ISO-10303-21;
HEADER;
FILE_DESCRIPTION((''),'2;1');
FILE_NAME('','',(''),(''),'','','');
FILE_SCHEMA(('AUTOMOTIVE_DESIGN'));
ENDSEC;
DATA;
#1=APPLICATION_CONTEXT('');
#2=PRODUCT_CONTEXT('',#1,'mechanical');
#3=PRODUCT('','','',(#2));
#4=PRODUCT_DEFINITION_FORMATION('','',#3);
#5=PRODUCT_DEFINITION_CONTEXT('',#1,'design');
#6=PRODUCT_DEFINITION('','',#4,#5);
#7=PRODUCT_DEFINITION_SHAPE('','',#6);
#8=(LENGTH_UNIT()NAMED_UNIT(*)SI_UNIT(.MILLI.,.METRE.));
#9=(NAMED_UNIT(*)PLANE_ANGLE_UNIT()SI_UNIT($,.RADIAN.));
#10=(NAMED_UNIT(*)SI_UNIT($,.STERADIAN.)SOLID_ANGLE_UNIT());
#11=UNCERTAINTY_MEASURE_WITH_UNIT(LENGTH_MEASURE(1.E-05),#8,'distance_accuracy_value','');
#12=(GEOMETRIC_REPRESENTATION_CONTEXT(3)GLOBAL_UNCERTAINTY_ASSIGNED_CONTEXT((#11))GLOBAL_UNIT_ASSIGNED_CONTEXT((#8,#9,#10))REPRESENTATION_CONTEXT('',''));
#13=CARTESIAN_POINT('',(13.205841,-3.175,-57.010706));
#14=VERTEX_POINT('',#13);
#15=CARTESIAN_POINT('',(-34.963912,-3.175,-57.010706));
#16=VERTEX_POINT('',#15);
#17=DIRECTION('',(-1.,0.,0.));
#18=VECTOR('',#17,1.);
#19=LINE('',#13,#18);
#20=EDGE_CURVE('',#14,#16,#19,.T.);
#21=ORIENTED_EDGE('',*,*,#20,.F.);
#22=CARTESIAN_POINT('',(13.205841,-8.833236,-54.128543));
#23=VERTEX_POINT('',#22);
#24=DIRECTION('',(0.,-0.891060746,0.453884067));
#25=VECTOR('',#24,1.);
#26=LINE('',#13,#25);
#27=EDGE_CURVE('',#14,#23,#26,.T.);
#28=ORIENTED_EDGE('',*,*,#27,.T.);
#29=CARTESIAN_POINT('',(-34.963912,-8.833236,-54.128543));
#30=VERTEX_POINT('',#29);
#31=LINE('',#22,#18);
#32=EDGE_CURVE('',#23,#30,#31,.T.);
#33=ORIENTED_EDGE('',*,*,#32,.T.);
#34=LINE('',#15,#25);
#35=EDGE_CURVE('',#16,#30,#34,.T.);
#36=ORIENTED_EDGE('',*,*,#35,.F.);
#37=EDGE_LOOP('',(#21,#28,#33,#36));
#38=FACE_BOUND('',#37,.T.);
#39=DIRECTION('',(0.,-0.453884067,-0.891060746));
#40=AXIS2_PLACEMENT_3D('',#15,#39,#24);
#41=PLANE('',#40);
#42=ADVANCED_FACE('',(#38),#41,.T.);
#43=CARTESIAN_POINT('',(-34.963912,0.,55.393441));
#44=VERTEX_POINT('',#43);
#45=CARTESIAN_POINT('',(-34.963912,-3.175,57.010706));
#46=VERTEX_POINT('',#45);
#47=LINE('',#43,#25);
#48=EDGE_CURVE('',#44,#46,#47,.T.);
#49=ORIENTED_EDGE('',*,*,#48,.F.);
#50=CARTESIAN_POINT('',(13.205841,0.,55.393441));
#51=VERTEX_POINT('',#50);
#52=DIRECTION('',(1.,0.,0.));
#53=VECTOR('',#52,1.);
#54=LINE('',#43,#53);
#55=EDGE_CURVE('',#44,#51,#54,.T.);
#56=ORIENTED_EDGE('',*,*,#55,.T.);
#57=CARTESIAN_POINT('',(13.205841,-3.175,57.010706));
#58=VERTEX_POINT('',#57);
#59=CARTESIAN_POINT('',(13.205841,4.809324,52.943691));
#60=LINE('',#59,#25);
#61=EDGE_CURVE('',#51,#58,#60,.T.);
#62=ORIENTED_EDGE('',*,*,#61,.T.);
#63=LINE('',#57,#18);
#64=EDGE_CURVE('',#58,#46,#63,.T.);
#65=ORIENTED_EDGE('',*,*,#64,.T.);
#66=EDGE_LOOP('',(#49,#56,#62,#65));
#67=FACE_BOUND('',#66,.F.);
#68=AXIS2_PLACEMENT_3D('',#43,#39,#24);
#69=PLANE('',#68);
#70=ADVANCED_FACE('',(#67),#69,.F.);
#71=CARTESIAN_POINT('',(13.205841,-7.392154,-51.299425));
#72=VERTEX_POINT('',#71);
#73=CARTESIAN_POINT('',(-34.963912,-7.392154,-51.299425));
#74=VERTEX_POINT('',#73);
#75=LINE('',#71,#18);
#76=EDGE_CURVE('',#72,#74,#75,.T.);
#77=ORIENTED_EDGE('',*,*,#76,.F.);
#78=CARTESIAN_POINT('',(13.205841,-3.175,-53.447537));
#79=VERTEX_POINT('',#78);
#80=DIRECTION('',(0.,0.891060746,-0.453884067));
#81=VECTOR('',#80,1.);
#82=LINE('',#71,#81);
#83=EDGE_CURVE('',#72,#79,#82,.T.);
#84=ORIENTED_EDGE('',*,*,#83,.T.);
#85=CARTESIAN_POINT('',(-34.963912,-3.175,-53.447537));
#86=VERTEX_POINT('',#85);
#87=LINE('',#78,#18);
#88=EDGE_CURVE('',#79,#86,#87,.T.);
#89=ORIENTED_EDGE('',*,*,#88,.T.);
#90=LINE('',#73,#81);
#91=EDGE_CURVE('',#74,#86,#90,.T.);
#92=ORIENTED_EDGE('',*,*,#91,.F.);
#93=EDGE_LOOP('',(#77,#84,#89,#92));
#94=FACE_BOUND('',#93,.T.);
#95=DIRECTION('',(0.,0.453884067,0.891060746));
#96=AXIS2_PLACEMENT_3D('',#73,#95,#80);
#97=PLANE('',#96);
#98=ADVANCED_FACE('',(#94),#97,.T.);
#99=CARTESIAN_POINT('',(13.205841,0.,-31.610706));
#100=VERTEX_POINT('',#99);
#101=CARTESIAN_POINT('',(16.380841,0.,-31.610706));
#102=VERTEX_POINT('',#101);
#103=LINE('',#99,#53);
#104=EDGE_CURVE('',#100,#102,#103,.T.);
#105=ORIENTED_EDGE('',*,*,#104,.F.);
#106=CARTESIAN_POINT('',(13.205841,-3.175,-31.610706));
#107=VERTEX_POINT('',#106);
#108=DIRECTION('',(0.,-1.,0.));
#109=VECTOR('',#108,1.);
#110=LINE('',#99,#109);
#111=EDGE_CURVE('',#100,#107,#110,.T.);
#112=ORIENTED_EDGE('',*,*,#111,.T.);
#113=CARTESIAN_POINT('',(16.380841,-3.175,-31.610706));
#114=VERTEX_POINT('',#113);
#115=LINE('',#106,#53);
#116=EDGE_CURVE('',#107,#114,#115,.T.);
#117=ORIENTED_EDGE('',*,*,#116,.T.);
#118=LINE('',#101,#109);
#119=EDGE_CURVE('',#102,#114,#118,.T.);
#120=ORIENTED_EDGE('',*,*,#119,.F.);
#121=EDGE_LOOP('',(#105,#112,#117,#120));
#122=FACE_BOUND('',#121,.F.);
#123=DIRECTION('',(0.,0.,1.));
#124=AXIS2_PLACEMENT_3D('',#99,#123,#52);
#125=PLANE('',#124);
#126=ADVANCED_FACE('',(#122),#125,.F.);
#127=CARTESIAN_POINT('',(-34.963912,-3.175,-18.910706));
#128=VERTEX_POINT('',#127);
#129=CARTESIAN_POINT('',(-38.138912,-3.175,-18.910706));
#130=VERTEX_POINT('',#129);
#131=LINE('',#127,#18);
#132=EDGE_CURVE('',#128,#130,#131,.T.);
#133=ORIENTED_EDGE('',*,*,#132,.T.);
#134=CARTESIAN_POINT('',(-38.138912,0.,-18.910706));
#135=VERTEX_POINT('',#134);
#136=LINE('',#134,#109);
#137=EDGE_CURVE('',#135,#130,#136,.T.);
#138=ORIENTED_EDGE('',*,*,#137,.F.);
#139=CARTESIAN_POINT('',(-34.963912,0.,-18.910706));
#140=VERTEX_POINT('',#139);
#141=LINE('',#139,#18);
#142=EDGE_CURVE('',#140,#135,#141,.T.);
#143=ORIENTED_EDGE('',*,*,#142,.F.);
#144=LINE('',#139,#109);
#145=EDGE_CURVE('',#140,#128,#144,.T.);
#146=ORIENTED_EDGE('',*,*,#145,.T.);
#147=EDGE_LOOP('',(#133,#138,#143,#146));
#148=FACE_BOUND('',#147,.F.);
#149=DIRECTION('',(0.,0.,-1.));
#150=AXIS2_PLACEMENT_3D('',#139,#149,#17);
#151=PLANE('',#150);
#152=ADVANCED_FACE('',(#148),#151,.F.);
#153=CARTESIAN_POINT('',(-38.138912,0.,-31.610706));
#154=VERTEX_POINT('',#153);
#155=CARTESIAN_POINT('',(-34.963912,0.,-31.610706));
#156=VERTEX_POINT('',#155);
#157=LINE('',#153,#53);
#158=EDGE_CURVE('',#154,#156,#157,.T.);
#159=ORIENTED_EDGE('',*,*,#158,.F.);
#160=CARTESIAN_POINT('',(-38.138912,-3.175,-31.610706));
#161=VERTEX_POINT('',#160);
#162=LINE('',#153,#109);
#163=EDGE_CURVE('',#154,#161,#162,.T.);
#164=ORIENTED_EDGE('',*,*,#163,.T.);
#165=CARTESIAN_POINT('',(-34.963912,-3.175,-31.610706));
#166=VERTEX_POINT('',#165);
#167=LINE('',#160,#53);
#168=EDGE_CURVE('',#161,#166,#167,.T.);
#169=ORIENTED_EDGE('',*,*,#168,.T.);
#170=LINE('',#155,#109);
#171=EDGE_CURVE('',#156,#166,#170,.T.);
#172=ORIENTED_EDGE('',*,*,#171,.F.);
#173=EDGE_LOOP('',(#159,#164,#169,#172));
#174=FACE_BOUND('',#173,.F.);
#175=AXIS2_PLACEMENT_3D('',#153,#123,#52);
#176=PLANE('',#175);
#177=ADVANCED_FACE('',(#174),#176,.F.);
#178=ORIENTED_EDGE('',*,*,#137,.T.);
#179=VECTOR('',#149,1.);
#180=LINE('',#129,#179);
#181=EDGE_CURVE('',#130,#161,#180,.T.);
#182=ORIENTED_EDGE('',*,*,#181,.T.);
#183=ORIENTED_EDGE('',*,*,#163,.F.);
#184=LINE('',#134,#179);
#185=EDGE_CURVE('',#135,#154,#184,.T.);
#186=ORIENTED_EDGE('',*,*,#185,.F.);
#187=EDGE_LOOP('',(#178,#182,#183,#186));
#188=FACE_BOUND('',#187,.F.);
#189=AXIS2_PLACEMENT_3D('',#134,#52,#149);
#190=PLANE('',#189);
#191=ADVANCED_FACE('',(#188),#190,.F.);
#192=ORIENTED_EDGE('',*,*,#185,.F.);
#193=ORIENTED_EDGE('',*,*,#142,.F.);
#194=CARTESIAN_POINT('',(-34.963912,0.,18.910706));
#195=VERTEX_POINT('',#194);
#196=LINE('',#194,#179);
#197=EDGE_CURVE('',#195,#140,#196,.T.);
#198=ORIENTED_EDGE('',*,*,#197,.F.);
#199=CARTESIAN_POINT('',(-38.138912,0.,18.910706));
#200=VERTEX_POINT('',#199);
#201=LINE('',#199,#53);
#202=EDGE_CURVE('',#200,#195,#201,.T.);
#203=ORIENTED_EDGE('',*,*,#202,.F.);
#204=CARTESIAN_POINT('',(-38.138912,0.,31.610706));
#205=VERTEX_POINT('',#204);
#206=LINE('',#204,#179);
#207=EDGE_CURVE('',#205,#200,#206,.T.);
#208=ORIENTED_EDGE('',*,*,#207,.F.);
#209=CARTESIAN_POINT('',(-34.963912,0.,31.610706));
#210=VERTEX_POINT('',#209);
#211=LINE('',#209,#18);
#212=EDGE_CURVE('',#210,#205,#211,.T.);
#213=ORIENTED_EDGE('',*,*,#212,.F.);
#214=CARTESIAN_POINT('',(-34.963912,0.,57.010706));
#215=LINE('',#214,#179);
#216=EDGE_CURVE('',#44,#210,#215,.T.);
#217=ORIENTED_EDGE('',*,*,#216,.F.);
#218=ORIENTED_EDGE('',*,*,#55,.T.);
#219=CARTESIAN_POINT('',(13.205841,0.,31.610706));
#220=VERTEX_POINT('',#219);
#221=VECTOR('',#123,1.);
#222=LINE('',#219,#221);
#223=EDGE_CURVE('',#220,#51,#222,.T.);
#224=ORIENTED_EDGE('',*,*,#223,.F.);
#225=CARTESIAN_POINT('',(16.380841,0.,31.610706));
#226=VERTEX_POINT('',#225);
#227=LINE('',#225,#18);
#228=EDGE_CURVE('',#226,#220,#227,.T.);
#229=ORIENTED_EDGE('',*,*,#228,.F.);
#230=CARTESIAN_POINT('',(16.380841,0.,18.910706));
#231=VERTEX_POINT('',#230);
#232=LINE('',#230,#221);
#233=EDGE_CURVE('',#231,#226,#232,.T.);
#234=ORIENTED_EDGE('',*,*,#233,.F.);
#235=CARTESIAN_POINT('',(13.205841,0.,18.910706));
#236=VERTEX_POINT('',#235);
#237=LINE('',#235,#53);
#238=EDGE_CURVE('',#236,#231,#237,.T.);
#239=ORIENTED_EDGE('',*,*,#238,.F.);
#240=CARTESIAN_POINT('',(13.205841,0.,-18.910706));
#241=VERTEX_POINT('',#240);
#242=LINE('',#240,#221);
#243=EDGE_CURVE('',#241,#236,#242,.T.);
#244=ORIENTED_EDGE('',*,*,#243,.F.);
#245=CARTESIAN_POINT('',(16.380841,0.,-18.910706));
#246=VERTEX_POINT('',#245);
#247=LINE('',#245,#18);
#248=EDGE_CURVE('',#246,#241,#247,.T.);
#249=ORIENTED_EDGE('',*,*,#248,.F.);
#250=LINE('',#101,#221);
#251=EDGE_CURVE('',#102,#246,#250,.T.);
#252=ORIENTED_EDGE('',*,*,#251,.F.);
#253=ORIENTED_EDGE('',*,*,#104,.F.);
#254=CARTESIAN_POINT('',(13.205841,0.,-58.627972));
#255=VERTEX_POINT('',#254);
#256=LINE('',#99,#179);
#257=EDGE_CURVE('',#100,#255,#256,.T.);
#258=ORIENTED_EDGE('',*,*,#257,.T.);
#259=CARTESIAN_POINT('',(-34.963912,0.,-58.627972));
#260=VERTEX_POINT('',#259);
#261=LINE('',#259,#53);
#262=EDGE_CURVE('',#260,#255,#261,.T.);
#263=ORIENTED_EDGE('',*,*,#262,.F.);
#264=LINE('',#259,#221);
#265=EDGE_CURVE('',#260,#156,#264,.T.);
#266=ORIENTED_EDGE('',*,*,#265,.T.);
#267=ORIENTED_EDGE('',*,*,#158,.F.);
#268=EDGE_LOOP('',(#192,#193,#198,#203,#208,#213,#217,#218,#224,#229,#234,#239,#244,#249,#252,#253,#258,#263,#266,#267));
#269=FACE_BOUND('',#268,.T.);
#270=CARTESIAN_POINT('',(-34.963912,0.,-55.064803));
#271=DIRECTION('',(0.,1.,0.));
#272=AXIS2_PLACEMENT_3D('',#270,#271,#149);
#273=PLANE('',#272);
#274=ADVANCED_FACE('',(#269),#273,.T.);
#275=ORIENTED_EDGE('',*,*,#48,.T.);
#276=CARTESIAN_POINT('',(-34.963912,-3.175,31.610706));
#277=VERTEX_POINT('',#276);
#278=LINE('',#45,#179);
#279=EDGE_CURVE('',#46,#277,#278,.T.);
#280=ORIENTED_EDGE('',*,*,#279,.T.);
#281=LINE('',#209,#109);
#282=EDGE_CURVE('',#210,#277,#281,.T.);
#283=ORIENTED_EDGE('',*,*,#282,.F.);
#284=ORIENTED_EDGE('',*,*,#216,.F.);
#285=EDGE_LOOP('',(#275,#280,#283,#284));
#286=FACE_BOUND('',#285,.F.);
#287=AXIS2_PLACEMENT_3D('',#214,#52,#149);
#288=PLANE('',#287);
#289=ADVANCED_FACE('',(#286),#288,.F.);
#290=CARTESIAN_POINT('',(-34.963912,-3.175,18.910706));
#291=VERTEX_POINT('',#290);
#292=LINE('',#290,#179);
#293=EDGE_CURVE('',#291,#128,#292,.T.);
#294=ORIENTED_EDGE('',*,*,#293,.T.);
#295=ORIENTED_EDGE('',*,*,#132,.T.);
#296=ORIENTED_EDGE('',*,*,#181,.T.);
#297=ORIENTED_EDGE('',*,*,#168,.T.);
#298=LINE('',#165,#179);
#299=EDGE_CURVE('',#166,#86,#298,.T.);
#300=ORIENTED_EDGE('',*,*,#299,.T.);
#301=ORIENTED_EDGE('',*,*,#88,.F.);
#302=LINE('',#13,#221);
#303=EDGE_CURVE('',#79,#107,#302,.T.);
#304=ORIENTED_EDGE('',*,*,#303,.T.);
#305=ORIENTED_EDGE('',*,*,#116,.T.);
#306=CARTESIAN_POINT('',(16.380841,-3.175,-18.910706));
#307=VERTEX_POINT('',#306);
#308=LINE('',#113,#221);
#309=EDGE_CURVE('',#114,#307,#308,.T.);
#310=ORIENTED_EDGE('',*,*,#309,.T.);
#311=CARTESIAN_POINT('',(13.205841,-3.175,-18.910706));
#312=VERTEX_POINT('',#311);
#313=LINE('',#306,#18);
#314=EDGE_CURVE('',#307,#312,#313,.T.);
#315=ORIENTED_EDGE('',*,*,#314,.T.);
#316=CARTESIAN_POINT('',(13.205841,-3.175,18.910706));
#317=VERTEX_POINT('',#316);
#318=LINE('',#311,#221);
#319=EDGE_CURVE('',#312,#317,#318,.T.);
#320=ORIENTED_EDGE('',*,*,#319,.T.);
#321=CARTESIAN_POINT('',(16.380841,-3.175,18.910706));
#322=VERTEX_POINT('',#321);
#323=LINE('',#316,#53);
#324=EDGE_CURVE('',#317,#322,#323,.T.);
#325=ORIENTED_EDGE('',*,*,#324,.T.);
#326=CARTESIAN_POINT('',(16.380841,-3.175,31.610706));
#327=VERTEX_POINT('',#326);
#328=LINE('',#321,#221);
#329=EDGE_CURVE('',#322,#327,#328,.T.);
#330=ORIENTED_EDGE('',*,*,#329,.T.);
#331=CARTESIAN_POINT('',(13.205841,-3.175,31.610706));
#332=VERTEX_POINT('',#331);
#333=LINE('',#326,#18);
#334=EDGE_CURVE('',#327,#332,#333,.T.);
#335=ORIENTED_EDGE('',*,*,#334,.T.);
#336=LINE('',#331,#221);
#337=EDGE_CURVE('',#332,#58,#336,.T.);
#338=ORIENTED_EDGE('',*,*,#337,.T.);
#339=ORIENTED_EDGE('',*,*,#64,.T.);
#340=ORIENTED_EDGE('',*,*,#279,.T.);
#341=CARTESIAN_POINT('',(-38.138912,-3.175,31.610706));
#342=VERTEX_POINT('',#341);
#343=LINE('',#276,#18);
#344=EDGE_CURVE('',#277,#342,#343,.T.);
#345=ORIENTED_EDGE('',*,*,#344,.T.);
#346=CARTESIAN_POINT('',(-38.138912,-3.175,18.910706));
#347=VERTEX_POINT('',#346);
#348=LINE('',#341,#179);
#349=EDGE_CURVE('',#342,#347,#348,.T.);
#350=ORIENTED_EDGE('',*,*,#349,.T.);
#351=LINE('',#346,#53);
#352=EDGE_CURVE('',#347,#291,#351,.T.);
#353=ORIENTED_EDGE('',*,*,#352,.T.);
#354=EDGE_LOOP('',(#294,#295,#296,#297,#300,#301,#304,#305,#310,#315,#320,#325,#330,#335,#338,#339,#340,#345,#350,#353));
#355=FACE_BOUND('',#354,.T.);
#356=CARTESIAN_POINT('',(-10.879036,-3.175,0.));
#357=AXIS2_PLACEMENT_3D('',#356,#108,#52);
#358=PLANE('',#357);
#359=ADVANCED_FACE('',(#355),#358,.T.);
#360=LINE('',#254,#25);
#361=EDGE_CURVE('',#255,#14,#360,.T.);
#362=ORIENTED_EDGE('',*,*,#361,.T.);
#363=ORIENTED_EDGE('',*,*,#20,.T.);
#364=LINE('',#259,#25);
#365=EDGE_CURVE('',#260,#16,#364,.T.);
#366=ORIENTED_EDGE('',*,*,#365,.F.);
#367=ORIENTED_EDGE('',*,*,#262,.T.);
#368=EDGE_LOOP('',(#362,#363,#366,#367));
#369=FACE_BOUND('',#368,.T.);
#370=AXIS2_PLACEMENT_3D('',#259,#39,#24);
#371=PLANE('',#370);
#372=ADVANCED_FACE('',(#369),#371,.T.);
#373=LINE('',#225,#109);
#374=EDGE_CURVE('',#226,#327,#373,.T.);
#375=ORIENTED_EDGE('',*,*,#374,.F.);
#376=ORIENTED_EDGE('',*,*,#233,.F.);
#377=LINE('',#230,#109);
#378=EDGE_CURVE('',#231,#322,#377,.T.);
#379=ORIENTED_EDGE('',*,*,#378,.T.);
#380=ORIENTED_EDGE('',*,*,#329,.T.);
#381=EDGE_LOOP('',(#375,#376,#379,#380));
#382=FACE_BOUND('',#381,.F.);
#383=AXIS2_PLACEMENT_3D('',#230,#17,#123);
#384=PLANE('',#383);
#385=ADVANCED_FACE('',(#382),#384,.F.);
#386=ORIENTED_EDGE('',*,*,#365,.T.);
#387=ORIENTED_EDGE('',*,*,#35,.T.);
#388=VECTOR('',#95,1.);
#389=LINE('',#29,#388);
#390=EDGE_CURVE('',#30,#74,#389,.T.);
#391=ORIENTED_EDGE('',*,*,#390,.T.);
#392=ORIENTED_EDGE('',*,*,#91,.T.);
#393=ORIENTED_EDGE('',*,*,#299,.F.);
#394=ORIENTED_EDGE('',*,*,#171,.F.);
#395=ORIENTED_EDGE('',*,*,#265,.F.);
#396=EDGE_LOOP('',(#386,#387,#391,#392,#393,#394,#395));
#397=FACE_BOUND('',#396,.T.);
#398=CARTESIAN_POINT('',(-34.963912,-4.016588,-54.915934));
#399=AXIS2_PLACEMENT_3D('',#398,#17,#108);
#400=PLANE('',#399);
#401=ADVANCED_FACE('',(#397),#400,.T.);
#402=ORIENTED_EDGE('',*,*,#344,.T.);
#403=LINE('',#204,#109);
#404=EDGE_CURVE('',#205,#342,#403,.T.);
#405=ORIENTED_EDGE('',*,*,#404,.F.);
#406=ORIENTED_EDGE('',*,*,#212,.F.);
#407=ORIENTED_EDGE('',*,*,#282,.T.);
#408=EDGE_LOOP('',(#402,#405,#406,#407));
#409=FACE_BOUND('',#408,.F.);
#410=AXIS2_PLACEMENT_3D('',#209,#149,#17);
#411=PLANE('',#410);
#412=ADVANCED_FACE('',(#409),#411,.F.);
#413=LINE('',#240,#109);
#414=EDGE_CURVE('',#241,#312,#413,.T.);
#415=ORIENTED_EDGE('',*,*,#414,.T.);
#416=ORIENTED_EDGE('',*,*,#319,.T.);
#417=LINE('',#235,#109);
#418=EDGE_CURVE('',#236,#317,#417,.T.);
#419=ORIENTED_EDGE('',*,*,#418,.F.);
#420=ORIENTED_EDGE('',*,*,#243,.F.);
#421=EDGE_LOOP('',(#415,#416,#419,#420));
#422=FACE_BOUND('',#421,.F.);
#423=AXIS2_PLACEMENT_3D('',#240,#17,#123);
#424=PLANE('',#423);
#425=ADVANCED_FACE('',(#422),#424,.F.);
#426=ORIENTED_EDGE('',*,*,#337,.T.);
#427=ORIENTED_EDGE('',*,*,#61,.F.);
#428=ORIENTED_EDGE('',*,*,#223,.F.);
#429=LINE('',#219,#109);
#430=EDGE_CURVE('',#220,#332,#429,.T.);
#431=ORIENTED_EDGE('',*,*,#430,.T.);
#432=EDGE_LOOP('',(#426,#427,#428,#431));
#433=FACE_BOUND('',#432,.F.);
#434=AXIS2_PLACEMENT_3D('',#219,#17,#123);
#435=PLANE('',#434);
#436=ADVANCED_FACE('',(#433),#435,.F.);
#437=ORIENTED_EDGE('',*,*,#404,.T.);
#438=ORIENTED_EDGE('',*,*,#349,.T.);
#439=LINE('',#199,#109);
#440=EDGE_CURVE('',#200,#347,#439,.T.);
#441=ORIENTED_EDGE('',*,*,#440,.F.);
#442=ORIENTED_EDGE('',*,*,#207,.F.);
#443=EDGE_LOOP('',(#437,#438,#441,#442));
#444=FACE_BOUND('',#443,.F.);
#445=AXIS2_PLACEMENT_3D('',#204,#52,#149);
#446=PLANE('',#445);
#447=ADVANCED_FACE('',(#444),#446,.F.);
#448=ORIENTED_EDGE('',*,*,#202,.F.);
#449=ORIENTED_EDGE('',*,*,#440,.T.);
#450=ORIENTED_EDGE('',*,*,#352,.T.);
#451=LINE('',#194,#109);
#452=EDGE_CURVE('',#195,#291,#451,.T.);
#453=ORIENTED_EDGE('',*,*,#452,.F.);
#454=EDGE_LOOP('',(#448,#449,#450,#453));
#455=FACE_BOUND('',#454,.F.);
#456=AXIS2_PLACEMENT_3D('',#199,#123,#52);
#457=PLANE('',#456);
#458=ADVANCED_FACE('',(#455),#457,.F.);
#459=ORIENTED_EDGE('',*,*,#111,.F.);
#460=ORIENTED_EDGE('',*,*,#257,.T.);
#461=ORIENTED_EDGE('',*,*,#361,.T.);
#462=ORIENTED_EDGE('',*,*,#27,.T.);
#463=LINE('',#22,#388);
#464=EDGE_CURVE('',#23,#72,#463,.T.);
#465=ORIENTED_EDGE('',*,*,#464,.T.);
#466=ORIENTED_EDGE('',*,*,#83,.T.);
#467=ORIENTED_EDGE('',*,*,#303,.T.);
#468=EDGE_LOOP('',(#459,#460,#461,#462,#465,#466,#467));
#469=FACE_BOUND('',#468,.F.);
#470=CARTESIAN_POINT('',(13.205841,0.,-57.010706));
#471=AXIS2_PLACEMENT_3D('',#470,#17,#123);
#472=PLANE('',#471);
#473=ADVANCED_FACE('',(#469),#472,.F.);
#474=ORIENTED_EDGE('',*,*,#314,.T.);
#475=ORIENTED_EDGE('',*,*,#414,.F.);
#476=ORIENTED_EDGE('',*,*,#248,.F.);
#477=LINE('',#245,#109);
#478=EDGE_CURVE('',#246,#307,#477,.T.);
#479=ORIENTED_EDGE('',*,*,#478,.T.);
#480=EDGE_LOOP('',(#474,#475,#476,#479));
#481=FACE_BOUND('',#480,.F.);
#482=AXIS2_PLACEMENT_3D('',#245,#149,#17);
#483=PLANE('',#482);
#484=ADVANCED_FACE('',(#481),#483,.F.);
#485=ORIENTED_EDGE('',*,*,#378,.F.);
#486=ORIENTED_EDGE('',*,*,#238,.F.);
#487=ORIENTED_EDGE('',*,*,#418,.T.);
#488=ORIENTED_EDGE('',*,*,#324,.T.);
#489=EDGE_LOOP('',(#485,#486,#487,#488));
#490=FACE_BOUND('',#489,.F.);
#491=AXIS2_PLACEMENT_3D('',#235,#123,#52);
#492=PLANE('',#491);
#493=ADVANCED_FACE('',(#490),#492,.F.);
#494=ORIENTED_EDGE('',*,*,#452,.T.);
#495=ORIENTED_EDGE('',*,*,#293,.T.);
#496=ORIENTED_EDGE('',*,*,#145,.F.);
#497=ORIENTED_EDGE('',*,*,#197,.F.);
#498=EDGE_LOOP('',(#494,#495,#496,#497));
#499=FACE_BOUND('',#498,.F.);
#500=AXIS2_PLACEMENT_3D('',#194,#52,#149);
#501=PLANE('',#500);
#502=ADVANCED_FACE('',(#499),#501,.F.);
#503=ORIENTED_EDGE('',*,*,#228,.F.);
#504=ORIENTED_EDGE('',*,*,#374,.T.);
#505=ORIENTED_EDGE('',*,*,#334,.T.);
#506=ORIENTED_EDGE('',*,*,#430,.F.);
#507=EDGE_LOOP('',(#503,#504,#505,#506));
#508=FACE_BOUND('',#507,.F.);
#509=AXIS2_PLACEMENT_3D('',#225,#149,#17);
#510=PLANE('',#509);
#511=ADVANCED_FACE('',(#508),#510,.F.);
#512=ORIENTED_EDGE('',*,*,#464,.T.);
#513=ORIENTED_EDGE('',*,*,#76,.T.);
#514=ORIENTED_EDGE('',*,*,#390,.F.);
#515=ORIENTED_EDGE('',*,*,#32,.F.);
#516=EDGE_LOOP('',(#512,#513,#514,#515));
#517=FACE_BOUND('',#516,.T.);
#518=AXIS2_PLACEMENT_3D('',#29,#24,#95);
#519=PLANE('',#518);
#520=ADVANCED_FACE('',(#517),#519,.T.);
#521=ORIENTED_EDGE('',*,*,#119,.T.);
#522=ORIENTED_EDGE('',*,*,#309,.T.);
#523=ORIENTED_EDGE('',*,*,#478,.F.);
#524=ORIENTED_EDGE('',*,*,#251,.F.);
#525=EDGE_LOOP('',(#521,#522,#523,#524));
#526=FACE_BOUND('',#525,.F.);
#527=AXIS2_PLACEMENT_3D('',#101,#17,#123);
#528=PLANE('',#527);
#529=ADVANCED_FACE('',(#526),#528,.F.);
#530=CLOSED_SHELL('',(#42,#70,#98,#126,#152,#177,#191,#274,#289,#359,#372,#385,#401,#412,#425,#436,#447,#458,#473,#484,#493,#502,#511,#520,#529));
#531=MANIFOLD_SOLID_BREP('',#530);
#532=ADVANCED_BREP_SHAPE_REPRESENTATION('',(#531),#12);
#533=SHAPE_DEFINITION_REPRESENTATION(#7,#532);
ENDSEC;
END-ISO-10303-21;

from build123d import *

# Parameters (mm, degrees)
F1_DEPTH = 3.175
F3_DEPTH = 43.942
F5_DEPTH = 76.2
F6_DEPTH = 48.1697538


# Not quite as in the source:
# - a feature names something its author has since deleted; it is built from what else it names


with BuildPart() as f1:
    # F0 (on Front) → F1 (new body)
    with BuildSketch(Plane.XZ):
        Polygon((-34.9639124011, -57.0107064), (9.4471751978, -57.0107064), (13.2058413989, -57.0107064), (13.2058413989, -31.6107064), (16.3808413989, -31.6107064), (16.3808413989, -18.9107064), (13.2058413989, -18.9107064), (13.2058413989, 18.9107064), (16.3808413989, 18.9107064), (16.3808413989, 31.6107064), (13.2058413989, 31.6107064), (13.2058413989, 57.0107064), (-34.9639124011, 57.0107064), (-34.9639124011, 31.6107064), (-38.1389124011, 31.6107064), (-38.1389124011, 18.9107064), (-34.9639124011, 18.9107064), (-34.9639124011, -18.9107064), (-38.1389124011, -18.9107064), (-38.1389124011, -31.6107064), (-34.9639124011, -31.6107064), align=None)
    extrude(amount=F1_DEPTH)

    # F2 (on face) → F3 (join)
    with BuildSketch(Plane(origin=(-34.9639124011, 0, 0), x_dir=(0, -1, 0), z_dir=(-1, 0, 0))):
        Polygon((0, -58.6279720227), (3.175, -57.0107064), (8.8332357394, -54.1285425744), (7.3921538265, -51.2994247047), (0, -55.0648030547), align=None)
    extrude(amount=-F3_DEPTH)

    # F4 (on face) → F5 (cut)
    with BuildSketch(Plane(origin=(-34.9639124011, 0, 0), x_dir=(0, -1, 0), z_dir=(-1, 0, 0))):
        Polygon((0, 55.3934407773), (3.175, 57.0107064), (0, 57.0107064), align=None)
    extrude(amount=-F5_DEPTH, mode=Mode.SUBTRACT)

    # F2 (on face) → F6 (join)
    with BuildSketch(Plane(origin=(-34.9639124011, 0, 0), x_dir=(0, -1, 0), z_dir=(-1, 0, 0))):
        Polygon((0, -58.6279720227), (3.175, -57.0107064), (8.8332357394, -54.1285425744), (7.3921538265, -51.2994247047), (0, -55.0648030547), align=None)
    extrude(amount=-F6_DEPTH)


solid = f1.part
